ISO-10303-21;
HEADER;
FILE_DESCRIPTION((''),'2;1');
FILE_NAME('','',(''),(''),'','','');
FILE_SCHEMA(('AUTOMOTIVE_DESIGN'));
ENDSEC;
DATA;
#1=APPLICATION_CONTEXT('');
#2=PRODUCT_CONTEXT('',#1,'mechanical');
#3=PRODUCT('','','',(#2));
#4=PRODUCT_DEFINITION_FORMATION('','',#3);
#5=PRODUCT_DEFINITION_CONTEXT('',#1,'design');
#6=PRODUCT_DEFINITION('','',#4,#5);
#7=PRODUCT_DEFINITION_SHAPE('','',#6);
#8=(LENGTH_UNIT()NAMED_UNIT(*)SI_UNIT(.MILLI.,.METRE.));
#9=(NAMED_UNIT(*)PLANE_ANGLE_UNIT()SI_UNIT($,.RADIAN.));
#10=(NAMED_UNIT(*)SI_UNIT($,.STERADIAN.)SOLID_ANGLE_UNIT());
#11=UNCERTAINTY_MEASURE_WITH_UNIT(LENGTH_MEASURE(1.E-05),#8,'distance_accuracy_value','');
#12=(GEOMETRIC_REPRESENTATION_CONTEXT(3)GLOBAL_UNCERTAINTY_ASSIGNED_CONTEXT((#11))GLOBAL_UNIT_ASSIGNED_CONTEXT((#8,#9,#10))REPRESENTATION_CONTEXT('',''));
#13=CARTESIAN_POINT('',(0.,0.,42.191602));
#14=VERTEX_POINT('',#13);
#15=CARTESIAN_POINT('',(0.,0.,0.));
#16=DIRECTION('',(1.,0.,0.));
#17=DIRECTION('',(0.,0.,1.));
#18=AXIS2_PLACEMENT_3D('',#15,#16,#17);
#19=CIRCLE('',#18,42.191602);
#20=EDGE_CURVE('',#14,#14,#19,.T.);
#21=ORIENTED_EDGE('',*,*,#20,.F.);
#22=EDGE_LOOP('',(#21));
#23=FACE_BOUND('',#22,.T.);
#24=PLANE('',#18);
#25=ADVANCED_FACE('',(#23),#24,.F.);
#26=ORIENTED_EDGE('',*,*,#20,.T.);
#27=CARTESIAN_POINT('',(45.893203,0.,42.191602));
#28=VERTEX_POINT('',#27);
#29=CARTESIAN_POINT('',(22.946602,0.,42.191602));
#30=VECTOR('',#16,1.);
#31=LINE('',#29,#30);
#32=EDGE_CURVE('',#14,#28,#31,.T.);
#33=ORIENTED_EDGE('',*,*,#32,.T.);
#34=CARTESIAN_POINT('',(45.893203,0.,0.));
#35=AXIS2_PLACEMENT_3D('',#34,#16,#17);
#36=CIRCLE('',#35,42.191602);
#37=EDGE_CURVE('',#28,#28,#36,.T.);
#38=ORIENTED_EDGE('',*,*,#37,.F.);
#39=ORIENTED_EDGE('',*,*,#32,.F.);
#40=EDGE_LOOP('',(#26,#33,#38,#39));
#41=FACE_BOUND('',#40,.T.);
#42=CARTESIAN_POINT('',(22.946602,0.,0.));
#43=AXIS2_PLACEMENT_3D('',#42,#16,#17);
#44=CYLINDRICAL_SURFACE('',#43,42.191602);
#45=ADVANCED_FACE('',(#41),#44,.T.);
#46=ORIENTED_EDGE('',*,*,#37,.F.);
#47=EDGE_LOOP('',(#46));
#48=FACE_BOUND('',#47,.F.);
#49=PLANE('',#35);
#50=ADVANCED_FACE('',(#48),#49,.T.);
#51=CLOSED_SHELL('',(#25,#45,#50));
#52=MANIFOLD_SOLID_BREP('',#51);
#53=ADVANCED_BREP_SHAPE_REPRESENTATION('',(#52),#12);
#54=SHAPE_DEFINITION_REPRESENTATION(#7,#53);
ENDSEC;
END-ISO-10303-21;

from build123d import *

# Parameters (mm, degrees)
F0_W = 45.8932034671
F0_H = 42.1916022897


# Not quite as in the source:
# - the program builds the solid bodies; features that only make, move or delete a surface that nothing else refers to are left out


with BuildPart() as f1:
    # F0 (on Front) → F1 (revolve)
    with BuildSketch(Plane.XZ):
        with Locations((22.9466017336, 21.0958011448)):
            Rectangle(F0_W, F0_H)
    revolve(axis=Axis((22.9466017336, 0, 0), (1, 0, 0)))


solid = f1.part
